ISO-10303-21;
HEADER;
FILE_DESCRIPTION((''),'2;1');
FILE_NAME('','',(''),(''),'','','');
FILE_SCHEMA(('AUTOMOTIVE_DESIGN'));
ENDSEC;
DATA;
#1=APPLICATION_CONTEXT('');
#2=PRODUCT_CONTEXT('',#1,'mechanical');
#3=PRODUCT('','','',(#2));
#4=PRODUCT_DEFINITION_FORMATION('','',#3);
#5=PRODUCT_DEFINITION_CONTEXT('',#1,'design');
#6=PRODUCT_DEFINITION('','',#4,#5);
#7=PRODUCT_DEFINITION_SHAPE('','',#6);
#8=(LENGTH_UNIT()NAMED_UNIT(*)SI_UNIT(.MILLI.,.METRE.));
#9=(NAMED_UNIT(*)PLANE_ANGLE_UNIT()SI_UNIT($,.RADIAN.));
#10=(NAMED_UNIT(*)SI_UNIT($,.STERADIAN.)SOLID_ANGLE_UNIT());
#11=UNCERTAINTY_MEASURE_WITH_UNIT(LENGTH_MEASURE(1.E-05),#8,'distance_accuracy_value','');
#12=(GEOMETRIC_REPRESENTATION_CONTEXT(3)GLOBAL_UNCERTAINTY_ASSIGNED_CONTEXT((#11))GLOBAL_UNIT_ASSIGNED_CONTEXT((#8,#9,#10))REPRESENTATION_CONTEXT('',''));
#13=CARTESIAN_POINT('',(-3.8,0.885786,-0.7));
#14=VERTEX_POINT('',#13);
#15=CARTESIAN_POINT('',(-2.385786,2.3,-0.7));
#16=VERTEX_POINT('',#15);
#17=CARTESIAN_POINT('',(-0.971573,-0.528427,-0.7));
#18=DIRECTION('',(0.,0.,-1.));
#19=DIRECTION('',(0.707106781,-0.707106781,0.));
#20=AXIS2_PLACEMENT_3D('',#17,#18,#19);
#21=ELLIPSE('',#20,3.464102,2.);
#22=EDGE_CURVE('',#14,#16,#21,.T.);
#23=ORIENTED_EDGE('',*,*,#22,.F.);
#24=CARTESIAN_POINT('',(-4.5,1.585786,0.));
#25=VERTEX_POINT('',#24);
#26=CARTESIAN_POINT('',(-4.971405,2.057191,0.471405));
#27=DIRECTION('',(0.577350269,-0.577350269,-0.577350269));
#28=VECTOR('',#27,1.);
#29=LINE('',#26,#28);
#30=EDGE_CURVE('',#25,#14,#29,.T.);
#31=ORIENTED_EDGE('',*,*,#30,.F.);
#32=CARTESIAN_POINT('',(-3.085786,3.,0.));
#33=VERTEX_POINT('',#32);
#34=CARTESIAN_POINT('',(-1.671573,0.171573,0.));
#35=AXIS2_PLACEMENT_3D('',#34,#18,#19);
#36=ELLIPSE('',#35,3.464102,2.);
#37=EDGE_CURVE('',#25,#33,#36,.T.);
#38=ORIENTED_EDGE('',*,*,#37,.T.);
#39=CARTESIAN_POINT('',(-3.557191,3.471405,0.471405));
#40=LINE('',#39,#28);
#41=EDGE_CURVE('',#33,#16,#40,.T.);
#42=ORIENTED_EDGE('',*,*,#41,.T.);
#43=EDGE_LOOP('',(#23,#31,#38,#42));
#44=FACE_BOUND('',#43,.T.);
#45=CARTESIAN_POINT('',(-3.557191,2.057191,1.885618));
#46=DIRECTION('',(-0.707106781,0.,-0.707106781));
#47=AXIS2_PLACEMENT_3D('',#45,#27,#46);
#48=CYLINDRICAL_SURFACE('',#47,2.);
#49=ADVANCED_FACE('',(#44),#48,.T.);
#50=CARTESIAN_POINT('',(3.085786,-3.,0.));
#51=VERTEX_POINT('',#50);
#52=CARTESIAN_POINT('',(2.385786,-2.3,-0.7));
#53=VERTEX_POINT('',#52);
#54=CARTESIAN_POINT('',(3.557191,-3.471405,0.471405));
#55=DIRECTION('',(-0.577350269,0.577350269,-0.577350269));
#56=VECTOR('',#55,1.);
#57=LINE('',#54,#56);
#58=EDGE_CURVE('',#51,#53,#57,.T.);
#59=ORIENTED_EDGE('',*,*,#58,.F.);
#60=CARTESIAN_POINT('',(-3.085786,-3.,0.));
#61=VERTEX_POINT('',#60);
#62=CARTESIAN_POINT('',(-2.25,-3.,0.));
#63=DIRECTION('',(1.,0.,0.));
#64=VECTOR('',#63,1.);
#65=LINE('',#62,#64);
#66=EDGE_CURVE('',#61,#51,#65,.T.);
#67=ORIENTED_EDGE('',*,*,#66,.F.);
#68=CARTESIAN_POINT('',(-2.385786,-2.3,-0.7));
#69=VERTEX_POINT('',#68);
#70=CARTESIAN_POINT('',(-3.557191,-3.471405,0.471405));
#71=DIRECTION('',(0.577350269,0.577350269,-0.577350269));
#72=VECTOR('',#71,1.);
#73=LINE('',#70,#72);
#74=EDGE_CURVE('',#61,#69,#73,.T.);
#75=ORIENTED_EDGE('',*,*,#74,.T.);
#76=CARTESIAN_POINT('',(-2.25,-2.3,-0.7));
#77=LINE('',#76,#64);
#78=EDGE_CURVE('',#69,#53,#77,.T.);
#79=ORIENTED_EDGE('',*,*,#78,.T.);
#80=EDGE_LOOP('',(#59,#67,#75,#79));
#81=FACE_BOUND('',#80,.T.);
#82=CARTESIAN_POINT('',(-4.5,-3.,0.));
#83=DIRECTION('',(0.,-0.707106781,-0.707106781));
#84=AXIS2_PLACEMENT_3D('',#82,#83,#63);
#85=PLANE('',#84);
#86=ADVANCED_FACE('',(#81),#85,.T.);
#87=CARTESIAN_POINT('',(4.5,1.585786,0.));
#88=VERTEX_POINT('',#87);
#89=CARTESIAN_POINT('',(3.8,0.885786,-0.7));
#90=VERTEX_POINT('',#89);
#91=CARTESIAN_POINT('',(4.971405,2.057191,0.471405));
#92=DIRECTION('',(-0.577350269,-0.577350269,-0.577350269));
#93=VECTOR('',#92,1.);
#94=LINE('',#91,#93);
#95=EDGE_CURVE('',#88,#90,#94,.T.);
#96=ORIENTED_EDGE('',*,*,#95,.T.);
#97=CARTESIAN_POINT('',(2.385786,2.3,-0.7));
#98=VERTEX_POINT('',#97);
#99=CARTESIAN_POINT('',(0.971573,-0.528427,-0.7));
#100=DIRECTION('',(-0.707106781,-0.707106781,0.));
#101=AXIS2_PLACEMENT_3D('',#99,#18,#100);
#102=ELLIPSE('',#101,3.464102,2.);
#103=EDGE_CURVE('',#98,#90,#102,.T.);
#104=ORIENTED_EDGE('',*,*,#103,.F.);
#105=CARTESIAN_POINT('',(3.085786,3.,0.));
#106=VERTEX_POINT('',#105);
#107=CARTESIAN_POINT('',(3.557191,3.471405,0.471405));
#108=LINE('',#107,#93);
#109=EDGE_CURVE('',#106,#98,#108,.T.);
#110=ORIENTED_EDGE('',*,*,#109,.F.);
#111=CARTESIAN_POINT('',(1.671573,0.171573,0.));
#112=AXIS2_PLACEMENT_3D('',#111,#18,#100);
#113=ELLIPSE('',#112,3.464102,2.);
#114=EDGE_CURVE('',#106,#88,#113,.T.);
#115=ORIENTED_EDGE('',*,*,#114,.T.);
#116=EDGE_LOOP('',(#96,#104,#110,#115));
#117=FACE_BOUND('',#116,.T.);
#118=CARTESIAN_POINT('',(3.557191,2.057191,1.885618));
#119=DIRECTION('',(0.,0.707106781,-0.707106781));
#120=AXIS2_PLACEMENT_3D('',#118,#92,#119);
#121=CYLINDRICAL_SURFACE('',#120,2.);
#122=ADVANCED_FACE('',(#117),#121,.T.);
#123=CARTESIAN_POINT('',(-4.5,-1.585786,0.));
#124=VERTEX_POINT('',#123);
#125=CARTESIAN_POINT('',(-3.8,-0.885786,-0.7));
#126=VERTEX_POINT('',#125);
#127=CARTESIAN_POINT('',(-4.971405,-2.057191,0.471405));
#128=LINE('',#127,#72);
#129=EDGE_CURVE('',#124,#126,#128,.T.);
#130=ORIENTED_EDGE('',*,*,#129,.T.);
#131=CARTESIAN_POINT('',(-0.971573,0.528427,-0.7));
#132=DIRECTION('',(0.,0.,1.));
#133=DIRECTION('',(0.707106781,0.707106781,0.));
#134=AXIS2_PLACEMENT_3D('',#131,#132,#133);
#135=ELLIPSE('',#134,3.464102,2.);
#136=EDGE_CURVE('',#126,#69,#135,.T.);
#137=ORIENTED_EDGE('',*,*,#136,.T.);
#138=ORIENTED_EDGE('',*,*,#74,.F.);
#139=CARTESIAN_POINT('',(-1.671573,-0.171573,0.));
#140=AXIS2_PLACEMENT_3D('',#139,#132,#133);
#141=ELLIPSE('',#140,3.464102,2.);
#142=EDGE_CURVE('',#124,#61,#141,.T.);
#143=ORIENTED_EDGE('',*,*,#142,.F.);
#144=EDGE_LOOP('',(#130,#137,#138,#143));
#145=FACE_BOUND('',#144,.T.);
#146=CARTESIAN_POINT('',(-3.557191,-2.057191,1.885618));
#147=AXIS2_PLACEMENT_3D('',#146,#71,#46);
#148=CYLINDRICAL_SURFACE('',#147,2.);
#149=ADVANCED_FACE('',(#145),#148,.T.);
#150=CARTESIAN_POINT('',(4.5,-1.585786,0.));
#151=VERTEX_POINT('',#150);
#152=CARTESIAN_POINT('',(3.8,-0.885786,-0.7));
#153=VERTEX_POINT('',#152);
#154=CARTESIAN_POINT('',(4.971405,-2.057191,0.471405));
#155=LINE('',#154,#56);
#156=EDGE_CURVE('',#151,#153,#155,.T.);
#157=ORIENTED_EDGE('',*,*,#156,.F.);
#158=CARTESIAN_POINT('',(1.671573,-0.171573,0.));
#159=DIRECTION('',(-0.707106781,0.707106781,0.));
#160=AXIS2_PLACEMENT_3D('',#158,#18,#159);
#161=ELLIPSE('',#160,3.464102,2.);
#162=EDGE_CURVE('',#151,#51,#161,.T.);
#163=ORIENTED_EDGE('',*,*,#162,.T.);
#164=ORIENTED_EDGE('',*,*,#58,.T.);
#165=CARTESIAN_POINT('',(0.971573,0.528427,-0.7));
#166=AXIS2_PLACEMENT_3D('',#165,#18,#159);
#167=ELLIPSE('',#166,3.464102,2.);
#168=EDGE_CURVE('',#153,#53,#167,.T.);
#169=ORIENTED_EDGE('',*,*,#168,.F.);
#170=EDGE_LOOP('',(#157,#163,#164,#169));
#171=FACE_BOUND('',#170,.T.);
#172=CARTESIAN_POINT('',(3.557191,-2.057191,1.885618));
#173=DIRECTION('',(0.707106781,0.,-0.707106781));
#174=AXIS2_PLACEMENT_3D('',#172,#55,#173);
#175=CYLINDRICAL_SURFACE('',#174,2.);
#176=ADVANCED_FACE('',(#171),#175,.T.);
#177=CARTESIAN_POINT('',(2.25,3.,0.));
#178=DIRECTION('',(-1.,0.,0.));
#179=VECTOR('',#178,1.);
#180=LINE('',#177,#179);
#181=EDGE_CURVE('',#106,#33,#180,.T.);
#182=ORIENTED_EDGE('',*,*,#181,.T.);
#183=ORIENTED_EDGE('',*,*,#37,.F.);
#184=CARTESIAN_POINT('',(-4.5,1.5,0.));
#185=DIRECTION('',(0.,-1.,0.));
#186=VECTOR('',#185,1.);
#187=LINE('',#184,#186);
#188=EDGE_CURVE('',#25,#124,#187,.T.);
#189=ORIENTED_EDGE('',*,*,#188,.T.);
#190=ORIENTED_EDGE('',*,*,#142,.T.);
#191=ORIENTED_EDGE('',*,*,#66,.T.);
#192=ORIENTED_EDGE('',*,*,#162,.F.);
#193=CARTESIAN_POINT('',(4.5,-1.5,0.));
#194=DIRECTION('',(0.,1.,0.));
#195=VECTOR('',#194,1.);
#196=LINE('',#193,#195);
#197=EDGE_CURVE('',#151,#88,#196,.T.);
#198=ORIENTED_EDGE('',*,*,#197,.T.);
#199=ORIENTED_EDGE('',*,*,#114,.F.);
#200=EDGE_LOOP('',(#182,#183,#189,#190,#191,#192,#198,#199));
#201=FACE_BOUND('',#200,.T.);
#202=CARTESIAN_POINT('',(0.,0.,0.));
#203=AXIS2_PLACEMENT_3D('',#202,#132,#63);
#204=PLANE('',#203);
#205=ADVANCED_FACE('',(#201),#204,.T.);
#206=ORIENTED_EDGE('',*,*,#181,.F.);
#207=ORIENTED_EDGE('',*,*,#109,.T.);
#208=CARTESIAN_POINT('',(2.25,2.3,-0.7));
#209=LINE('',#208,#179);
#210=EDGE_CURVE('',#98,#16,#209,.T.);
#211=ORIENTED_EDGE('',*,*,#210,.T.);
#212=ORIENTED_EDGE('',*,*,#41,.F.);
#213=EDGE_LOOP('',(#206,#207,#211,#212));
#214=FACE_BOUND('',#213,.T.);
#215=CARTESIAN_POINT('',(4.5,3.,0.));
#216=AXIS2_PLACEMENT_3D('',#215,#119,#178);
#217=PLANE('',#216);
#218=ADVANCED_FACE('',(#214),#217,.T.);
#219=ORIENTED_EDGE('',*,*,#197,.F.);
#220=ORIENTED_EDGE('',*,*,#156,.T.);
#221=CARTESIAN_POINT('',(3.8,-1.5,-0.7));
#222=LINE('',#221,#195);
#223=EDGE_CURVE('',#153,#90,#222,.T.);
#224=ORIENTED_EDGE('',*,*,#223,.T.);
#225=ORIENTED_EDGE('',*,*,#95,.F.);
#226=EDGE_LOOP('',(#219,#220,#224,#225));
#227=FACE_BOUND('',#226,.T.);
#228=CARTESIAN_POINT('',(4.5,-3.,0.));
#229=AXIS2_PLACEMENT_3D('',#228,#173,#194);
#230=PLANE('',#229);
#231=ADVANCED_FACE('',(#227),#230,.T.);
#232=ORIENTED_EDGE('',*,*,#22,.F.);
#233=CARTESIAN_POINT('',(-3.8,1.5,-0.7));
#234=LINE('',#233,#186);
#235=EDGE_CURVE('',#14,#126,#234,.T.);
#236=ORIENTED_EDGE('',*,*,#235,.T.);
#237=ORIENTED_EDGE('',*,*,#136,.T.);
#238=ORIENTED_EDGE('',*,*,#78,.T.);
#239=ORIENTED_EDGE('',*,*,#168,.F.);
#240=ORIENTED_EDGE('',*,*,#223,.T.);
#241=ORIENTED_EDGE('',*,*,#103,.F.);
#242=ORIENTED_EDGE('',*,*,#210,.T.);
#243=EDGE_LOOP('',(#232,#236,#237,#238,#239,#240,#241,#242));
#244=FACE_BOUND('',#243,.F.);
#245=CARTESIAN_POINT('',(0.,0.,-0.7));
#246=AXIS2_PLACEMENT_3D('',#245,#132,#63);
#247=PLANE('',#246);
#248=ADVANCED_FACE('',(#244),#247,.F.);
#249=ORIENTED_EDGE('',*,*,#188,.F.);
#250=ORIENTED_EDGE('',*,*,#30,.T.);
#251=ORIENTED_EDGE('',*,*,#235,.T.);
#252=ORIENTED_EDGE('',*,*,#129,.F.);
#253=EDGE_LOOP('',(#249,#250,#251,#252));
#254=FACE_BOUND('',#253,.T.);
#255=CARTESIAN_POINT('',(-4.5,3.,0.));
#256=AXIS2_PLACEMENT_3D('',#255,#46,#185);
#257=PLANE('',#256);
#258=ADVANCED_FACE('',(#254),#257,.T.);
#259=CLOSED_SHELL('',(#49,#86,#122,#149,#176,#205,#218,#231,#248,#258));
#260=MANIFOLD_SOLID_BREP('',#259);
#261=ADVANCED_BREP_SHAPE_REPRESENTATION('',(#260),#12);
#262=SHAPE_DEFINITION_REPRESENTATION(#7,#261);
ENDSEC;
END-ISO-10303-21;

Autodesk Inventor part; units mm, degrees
ref_plane "YZ Plane" through (0, 0, 0) normal (1, 0, 0) x (0, 1, 0)
ref_plane "XZ Plane" through (0, 0, 0) normal (0, 1, 0) x (-1, 0, 0)
ref_plane "XY Plane" through (0, 0, 0) normal (0, 0, 1) x (1, 0, 0)
sketch "Sketch1" plane through (0, 0, 0) normal (0, 0, 1) x (1, 0, 0)
  line L0 (-4.5, -3) -> (4.5, -3)
  line L1 (4.5, -3) -> (4.5, 3)
  line L2 (4.5, 3) -> (-4.5, 3)
  line L3 (-4.5, 3) -> (-4.5, -3)
  line L4 (-4.5, -3) -> (4.5, 3) construction
  line L5 (4.5, -3) -> (-4.5, 3) construction
  point P0 (0, 0)
  dimension "d0" = 9
  dimension "d1" = 6
extrude "Extrusion1" add sketch "Sketch1" against normal blind 0.7 draft -45
fillet "Fillet1" radius 2 4 edges at (-4.15, -2.65, -0.35) (-4.15, 2.65, -0.35) (4.15, -2.65, -0.35) (4.15, 2.65, -0.35)
properties part number "Base N Wide"
